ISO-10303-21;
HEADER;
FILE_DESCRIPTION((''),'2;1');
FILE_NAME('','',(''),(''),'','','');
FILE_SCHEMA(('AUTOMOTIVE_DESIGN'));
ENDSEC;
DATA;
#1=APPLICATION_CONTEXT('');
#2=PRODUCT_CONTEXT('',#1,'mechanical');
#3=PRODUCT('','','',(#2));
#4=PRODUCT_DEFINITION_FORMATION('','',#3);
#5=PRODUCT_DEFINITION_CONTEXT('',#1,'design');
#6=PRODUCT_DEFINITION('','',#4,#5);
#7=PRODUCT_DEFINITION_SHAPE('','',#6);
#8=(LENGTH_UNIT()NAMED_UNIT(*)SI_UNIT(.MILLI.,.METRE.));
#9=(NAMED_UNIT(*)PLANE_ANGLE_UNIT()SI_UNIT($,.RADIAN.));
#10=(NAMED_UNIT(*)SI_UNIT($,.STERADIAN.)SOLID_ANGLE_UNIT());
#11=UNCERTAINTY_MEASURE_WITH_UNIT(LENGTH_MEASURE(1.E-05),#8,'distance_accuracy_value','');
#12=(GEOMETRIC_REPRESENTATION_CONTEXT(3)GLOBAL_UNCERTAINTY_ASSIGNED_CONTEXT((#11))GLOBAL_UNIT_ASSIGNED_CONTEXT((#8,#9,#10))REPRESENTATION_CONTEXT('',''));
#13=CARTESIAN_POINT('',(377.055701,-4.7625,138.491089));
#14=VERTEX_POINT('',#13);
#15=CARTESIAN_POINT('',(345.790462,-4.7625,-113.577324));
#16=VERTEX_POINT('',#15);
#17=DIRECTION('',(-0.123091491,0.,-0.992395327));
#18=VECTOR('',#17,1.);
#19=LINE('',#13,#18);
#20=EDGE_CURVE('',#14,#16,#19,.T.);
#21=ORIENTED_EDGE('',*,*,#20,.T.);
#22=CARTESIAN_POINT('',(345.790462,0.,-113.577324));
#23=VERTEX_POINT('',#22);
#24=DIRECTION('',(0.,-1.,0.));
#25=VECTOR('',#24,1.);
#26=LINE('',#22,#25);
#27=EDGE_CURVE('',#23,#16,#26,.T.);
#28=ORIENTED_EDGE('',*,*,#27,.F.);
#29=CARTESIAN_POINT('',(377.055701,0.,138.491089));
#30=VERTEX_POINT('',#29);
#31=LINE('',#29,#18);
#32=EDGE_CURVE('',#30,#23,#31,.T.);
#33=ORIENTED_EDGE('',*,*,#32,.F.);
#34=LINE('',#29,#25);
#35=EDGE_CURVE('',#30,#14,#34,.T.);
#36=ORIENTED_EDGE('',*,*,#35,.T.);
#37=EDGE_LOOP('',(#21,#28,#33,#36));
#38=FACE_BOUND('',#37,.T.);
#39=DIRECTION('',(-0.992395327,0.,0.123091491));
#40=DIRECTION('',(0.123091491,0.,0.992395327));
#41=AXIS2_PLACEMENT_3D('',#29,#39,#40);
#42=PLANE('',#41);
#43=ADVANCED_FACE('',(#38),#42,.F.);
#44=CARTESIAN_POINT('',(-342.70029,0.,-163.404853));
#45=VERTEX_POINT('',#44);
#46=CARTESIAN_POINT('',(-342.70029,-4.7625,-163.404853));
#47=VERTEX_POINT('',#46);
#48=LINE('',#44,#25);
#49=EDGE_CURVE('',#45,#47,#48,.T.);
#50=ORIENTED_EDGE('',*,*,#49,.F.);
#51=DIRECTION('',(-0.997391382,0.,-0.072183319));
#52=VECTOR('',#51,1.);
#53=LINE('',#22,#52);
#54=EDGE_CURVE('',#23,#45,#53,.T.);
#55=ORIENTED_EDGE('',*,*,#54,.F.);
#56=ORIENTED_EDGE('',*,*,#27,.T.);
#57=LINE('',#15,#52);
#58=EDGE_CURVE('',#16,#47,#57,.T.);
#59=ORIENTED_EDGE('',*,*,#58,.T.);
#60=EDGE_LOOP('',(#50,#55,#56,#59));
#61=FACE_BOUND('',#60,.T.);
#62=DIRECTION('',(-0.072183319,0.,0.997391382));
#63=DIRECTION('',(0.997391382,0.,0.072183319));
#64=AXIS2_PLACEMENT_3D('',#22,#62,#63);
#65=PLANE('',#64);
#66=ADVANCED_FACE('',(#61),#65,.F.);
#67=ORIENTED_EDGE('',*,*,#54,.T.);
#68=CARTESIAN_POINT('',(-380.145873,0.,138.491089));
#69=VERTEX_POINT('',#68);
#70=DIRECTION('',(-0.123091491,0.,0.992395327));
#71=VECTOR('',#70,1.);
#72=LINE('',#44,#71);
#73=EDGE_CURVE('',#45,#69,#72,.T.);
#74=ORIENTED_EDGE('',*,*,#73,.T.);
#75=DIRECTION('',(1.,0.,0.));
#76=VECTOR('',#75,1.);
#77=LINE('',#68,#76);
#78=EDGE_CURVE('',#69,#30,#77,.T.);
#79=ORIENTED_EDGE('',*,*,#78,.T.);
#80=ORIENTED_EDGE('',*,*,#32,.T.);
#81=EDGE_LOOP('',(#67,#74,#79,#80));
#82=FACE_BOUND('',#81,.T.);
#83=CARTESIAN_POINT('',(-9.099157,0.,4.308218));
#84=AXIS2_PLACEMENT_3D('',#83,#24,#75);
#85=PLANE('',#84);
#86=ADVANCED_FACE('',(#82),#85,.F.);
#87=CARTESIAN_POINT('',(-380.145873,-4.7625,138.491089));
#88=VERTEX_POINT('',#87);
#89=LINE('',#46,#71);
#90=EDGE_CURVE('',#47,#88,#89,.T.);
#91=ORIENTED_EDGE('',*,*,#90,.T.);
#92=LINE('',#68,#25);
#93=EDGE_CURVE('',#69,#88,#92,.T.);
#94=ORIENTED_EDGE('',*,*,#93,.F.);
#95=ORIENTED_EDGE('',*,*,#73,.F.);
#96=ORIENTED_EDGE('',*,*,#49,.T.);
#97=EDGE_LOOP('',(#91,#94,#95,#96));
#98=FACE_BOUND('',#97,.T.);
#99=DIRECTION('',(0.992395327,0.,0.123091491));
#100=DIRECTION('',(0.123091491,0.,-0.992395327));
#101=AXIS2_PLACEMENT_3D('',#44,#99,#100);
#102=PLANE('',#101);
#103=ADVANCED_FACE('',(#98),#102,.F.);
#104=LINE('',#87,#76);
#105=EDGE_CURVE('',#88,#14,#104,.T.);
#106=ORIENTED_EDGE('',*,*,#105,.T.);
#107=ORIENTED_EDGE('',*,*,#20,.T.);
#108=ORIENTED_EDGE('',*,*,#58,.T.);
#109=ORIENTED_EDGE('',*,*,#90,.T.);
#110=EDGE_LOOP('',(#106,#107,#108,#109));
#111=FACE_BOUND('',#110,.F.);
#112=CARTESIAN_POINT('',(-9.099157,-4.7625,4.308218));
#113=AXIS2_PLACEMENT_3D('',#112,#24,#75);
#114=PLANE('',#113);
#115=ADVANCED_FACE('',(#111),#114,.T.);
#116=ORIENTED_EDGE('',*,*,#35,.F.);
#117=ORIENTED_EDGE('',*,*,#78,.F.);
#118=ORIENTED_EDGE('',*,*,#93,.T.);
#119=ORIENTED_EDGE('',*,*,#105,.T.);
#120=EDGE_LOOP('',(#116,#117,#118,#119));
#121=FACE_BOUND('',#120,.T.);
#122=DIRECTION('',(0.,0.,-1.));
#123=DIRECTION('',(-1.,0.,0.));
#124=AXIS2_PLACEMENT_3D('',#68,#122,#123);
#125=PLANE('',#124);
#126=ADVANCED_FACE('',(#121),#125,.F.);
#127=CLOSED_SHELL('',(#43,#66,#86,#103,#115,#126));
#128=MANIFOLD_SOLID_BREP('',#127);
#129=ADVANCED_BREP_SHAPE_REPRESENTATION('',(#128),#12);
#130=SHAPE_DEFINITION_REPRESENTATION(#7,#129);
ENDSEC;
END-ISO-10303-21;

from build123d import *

# Parameters (mm, degrees)
F1_DEPTH = 4.7625


# Not quite as in the source:
# - a length typed as a fraction of an inch, garbled in the dataset ("3 / 203.2 mm" for 3/8 in), is restored


with BuildPart() as f1:
    # F0 (on Front) → F1 (new body)
    with BuildSketch(Plane.XZ):
        Polygon((342.7002896502, -163.4048530862), (380.145872664, 138.4910887061), (-377.0557005115, 138.4910887061), (-345.7904618027, -113.577324326), align=None)
    extrude(amount=F1_DEPTH)


with BuildPart() as f2_1:
    # F2: instance of F1
    add(f1.part.mirror(Plane.YZ))


solid = f2_1.part
